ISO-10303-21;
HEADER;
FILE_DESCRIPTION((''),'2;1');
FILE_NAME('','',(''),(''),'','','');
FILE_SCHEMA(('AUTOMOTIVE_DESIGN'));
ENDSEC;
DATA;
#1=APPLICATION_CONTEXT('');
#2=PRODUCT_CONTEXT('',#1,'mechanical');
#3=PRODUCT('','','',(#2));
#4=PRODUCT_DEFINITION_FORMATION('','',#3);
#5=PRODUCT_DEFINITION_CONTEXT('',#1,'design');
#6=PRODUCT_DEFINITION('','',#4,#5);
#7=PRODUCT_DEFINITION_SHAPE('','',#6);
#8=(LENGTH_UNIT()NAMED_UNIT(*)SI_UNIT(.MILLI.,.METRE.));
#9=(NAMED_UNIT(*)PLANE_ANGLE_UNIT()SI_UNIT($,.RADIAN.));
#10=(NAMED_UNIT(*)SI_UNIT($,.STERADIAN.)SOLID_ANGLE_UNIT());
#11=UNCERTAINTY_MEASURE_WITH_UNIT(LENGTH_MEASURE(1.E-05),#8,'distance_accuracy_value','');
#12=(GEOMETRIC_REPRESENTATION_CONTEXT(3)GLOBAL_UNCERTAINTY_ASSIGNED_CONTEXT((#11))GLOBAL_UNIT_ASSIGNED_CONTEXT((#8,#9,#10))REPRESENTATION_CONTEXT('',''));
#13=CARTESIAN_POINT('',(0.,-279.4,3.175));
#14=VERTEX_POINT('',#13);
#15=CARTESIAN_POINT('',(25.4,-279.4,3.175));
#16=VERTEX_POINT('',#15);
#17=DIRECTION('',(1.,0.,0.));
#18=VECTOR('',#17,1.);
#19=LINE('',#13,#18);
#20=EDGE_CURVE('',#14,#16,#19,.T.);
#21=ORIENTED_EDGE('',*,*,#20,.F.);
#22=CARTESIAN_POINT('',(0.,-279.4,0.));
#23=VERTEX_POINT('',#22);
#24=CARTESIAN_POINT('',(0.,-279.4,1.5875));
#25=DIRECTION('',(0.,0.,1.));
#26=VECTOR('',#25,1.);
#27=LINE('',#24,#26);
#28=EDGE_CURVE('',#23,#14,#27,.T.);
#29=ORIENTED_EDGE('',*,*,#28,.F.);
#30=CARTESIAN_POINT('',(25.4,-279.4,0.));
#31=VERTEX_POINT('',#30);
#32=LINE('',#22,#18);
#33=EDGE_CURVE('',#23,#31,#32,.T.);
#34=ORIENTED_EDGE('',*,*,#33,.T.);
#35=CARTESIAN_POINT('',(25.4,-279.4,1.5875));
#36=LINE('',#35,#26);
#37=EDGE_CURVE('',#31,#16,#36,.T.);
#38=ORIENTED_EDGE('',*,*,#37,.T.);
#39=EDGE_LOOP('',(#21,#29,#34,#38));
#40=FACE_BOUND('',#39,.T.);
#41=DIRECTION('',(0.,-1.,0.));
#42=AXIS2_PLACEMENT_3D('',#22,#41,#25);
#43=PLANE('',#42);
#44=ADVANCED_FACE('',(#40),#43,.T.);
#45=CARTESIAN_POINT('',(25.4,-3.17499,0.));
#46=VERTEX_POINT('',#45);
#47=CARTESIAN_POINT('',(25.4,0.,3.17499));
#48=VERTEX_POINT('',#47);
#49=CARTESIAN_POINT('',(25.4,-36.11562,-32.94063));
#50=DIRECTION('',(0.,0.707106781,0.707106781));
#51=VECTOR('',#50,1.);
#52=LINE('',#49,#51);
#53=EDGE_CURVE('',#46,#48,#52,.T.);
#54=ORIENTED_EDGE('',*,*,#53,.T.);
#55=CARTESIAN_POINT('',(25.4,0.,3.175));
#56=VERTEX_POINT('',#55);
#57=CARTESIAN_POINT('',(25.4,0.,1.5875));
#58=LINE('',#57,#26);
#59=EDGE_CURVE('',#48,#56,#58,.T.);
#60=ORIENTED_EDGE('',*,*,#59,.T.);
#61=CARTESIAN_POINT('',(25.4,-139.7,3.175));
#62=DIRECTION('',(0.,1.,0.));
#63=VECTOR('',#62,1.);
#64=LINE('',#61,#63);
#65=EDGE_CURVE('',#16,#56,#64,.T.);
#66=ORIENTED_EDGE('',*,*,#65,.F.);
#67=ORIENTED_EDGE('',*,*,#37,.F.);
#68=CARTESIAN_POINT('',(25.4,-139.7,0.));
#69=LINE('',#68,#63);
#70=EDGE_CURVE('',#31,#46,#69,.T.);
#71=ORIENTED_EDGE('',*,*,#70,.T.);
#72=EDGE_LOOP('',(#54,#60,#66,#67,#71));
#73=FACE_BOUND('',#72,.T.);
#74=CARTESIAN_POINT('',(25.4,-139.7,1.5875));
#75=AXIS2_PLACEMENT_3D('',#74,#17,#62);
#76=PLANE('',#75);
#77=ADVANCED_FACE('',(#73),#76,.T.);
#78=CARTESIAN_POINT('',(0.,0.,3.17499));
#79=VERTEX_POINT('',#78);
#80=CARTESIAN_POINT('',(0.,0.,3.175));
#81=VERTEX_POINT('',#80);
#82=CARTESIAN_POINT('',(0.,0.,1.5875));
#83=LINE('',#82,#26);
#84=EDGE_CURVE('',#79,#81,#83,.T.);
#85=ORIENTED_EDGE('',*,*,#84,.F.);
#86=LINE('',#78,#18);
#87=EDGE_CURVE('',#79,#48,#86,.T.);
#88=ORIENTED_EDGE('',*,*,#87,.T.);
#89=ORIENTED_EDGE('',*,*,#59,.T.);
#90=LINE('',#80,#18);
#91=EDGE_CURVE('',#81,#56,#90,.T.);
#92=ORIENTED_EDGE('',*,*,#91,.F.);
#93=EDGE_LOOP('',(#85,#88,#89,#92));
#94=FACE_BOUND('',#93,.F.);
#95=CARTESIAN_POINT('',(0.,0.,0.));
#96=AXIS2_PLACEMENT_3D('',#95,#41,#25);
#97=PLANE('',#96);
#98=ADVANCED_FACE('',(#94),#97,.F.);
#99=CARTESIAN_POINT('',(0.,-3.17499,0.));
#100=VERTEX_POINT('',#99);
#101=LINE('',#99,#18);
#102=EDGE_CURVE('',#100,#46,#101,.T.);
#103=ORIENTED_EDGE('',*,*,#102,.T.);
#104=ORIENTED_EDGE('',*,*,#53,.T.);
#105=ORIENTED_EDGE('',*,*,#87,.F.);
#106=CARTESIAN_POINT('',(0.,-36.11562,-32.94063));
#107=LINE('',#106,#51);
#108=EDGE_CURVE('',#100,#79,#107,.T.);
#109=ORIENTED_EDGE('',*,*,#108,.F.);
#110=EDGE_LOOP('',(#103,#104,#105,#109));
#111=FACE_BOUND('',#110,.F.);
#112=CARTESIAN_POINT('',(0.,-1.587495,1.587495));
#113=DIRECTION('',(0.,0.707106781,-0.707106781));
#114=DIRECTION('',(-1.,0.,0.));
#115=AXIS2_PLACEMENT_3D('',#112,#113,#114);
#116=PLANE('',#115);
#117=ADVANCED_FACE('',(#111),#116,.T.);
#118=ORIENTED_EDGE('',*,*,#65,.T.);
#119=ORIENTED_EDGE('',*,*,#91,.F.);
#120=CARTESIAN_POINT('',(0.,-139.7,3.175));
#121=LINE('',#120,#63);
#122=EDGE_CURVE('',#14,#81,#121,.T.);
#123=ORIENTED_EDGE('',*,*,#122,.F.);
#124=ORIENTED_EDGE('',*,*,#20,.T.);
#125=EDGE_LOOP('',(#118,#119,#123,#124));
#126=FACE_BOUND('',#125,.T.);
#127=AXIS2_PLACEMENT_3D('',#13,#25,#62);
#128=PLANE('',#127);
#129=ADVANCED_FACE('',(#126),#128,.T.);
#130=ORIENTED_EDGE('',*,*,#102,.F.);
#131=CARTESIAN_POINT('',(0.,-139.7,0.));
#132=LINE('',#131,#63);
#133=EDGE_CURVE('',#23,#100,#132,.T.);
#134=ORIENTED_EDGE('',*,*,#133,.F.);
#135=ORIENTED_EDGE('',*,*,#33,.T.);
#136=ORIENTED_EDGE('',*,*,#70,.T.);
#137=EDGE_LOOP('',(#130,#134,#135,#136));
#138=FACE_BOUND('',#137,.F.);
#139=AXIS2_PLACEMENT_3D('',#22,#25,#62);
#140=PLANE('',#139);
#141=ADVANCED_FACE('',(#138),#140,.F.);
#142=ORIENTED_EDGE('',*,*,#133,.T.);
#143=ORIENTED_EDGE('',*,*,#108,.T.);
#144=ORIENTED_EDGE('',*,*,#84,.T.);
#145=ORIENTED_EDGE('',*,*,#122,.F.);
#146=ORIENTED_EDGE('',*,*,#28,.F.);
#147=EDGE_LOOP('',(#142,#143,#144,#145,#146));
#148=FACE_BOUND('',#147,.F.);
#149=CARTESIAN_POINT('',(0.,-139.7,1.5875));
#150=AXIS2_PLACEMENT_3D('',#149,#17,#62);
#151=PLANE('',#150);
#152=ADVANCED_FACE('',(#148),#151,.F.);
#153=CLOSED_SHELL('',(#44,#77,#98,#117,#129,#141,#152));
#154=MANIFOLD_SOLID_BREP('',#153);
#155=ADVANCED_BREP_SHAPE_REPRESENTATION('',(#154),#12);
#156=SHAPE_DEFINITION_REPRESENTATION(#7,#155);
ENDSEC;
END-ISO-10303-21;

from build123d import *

# Parameters (mm, degrees)
F0_W     = 279.4
F0_H     = 3.175
F1_DEPTH = 25.4
F2_SIZE  = 3.17499


# Not quite as in the source:
# - a fillet or chamfer is up to 0.001 mm smaller than in the source, because OpenCascade refuses the exact size


with BuildPart() as f1:
    # F0 (on Right) → F1 (new body)
    with BuildSketch(Plane.YZ):
        with Locations((-139.7, 1.5875)):
            Rectangle(F0_W, F0_H)
    extrude(amount=F1_DEPTH)

    # F2 (size 3.175 in the source; OpenCascade refuses exactly that, so slightly less here)
    f2_edges = [f1.edges().sort_by_distance(p)[0] for p in [
        (12.7, 0, 0),
    ]]
    chamfer(f2_edges, length=F2_SIZE)


solid = f1.part
